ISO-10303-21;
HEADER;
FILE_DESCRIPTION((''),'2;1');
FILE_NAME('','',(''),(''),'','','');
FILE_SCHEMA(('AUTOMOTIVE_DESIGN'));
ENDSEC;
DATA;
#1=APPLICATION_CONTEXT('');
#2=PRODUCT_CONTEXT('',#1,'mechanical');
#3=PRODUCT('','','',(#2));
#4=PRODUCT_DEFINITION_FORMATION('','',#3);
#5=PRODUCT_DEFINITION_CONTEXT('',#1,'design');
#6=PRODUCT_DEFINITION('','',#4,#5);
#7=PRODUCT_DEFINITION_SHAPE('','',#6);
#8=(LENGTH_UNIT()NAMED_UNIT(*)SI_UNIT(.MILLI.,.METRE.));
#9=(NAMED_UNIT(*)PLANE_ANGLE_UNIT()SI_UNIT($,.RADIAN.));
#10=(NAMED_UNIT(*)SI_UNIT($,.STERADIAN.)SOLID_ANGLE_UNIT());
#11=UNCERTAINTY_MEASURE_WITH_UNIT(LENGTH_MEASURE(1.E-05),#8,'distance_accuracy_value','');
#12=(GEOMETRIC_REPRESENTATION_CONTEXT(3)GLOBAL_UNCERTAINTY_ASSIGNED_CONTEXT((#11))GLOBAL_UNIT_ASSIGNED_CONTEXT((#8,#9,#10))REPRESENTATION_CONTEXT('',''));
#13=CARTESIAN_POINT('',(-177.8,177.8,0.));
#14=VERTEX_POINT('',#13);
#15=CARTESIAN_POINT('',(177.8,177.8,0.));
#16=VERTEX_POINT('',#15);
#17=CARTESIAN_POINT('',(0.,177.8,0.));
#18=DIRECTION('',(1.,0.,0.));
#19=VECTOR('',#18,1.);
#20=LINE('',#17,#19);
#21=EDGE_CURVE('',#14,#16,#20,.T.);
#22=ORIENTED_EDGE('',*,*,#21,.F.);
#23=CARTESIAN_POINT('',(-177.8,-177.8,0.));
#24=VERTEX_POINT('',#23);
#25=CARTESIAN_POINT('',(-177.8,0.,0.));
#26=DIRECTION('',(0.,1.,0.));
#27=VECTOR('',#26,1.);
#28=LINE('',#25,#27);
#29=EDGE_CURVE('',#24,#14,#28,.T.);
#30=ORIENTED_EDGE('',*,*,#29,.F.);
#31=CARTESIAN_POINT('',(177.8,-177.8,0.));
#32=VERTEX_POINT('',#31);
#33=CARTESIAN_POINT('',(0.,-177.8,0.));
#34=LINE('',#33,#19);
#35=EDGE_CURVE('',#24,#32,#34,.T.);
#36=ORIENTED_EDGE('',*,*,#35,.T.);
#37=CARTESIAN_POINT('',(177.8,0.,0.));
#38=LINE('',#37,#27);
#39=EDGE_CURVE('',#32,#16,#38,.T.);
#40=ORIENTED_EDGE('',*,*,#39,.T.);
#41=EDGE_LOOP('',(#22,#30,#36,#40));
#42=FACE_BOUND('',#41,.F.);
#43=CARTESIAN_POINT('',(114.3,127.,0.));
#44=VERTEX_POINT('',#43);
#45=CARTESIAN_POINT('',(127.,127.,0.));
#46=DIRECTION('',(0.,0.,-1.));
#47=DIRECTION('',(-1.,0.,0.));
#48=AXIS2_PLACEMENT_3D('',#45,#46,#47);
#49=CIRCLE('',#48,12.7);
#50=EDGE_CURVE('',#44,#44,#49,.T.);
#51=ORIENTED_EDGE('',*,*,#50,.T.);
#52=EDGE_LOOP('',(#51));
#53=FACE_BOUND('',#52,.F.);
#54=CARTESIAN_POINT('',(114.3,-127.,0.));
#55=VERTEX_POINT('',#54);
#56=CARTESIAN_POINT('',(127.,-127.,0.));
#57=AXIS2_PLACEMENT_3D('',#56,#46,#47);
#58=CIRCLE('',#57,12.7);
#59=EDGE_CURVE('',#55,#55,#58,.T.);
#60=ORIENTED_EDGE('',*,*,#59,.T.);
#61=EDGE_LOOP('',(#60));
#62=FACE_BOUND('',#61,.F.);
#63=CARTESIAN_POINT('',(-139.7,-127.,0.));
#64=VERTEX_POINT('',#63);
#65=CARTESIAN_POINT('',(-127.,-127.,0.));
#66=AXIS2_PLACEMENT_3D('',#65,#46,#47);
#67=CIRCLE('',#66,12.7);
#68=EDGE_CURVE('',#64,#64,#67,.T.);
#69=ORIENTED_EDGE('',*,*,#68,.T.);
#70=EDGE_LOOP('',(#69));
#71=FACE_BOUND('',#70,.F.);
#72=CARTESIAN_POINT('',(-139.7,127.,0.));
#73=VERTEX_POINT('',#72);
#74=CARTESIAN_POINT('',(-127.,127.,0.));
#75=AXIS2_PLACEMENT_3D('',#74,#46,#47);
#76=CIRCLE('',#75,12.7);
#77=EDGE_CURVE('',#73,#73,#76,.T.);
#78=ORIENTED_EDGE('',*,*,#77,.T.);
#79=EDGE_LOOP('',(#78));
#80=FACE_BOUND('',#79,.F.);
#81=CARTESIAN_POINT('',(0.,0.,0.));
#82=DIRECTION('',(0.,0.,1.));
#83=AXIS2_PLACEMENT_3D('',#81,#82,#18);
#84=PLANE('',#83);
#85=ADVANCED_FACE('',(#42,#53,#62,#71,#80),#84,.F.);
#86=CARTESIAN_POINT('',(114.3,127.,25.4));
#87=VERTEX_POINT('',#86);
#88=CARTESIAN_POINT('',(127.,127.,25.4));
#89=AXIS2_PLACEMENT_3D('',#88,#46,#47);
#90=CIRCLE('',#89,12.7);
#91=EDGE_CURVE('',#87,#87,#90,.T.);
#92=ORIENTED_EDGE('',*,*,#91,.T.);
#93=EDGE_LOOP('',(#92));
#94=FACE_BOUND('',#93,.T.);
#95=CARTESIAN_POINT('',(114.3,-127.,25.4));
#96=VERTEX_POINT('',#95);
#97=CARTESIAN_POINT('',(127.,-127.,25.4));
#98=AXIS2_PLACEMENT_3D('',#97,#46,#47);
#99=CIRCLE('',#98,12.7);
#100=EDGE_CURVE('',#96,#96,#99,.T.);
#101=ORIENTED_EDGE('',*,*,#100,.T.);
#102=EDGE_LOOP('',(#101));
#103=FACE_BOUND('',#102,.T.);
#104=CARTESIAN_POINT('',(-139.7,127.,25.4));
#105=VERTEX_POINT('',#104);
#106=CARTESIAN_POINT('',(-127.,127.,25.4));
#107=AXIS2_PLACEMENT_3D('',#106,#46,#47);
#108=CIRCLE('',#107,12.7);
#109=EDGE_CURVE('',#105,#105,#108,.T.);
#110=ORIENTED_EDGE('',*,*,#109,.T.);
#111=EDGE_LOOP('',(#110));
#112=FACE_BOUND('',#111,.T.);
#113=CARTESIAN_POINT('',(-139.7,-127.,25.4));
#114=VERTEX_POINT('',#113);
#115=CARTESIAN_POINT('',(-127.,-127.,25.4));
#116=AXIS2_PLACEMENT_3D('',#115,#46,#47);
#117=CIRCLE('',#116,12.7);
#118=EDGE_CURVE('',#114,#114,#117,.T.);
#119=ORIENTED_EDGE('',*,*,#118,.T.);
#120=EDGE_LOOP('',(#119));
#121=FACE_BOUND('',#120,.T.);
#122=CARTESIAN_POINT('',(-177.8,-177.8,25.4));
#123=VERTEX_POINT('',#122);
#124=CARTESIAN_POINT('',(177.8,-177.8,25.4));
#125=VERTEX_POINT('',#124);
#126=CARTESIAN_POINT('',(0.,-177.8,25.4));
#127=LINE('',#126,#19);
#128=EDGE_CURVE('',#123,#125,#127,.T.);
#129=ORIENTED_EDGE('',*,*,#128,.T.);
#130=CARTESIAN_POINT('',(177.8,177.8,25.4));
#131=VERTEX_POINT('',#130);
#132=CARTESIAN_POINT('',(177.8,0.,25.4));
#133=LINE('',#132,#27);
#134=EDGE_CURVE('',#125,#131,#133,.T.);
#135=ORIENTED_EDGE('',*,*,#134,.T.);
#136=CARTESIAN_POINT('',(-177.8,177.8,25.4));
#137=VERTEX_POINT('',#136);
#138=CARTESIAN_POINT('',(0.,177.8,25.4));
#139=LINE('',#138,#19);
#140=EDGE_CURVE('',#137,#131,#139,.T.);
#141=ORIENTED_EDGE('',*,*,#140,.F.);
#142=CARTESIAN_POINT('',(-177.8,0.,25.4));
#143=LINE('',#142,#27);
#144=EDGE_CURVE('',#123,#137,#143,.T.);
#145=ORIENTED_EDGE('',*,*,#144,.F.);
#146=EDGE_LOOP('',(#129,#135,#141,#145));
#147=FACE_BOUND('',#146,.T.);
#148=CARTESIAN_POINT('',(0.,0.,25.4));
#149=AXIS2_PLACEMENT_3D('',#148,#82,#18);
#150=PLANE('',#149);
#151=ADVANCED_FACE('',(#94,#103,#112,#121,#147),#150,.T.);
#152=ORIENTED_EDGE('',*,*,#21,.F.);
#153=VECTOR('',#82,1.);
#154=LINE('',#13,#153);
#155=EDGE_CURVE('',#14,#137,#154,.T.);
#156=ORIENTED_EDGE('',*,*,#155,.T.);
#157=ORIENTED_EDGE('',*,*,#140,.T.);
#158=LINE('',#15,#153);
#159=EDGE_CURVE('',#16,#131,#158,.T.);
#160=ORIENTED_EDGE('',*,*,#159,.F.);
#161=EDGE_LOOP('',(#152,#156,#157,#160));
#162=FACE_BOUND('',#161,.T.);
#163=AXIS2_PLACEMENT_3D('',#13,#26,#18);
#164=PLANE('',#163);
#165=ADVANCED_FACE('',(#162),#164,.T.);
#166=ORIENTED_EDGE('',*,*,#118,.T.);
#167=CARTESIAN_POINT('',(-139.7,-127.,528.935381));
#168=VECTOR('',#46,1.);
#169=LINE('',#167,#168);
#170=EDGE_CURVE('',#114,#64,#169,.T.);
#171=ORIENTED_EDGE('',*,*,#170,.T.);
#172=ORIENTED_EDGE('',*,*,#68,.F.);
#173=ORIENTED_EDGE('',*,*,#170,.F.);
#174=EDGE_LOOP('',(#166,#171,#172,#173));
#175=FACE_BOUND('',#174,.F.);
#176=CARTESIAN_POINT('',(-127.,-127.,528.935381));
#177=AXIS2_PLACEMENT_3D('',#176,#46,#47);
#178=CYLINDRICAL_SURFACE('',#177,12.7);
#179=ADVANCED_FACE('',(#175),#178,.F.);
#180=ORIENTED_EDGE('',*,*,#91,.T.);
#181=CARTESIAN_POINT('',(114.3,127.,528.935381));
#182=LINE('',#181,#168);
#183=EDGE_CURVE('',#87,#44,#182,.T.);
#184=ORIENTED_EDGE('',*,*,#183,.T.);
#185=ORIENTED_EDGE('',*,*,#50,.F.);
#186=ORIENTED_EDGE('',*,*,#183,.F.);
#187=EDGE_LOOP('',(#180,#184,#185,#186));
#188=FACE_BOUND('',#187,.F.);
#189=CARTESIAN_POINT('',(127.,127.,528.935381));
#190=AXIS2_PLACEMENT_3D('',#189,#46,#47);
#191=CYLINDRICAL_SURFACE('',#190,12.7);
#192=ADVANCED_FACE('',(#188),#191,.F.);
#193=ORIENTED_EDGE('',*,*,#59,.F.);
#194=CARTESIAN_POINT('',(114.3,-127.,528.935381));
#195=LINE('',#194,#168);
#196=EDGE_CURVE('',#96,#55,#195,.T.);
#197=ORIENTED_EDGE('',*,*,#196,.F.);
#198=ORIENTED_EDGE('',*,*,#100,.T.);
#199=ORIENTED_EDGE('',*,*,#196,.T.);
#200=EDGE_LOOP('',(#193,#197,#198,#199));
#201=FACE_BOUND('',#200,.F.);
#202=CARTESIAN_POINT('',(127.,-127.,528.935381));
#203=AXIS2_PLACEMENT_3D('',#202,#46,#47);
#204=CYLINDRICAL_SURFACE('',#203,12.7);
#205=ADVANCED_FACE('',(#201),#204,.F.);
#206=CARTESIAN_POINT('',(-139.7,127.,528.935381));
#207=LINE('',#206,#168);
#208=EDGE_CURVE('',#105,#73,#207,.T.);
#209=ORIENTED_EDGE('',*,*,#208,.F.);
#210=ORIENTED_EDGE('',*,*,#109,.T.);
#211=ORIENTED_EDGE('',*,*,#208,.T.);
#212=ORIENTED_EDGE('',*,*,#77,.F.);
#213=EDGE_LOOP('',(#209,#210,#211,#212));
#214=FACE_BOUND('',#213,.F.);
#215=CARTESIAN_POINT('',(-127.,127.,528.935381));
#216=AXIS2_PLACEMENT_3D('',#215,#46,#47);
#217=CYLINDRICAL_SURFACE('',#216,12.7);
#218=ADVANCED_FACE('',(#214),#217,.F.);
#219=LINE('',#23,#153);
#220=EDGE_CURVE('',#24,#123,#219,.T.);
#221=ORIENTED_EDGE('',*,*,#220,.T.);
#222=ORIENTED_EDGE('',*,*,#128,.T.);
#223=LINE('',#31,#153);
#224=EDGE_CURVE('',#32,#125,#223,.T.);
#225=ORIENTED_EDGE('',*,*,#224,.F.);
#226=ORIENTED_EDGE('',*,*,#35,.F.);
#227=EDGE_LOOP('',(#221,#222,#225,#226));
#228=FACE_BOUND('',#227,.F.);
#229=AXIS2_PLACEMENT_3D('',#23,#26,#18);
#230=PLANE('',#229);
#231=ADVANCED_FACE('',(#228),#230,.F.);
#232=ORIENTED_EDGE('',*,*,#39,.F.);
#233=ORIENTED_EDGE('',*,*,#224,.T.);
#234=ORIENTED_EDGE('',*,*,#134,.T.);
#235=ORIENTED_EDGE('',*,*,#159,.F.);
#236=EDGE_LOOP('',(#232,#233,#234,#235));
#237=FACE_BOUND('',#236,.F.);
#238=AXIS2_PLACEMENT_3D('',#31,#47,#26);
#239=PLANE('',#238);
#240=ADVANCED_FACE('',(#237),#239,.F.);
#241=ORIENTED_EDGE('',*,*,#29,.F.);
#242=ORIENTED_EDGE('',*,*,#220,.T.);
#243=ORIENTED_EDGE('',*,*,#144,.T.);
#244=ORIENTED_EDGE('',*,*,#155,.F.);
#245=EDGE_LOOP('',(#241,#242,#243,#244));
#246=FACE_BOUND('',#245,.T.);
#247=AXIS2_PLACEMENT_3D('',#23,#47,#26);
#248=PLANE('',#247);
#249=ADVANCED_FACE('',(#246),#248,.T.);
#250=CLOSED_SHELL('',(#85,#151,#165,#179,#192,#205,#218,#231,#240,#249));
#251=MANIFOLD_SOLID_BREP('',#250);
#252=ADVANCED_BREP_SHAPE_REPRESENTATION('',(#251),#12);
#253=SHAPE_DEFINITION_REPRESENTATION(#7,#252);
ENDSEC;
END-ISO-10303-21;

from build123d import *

# Parameters (mm, degrees)
F0_W     = 355.6
F0_H     = 355.6
F1_DEPTH = 25.4
F4_D     = 25.4


# Not quite as in the source:
# - the program builds the solid bodies; features that only make, move or delete a surface that nothing else refers to are left out


with BuildPart() as f1:
    # F0 (on Top) → F1 (new body)
    with BuildSketch(Plane.XY):
        Rectangle(F0_W, F0_H)
    extrude(amount=F1_DEPTH)

    # F4 (through all)
    with Locations(Plane.XY.offset(25.4)):
        with Locations((-127, -127), (127, -127), (127, 127), (-127, 127)):
            Hole(F4_D / 2)


solid = f1.part
